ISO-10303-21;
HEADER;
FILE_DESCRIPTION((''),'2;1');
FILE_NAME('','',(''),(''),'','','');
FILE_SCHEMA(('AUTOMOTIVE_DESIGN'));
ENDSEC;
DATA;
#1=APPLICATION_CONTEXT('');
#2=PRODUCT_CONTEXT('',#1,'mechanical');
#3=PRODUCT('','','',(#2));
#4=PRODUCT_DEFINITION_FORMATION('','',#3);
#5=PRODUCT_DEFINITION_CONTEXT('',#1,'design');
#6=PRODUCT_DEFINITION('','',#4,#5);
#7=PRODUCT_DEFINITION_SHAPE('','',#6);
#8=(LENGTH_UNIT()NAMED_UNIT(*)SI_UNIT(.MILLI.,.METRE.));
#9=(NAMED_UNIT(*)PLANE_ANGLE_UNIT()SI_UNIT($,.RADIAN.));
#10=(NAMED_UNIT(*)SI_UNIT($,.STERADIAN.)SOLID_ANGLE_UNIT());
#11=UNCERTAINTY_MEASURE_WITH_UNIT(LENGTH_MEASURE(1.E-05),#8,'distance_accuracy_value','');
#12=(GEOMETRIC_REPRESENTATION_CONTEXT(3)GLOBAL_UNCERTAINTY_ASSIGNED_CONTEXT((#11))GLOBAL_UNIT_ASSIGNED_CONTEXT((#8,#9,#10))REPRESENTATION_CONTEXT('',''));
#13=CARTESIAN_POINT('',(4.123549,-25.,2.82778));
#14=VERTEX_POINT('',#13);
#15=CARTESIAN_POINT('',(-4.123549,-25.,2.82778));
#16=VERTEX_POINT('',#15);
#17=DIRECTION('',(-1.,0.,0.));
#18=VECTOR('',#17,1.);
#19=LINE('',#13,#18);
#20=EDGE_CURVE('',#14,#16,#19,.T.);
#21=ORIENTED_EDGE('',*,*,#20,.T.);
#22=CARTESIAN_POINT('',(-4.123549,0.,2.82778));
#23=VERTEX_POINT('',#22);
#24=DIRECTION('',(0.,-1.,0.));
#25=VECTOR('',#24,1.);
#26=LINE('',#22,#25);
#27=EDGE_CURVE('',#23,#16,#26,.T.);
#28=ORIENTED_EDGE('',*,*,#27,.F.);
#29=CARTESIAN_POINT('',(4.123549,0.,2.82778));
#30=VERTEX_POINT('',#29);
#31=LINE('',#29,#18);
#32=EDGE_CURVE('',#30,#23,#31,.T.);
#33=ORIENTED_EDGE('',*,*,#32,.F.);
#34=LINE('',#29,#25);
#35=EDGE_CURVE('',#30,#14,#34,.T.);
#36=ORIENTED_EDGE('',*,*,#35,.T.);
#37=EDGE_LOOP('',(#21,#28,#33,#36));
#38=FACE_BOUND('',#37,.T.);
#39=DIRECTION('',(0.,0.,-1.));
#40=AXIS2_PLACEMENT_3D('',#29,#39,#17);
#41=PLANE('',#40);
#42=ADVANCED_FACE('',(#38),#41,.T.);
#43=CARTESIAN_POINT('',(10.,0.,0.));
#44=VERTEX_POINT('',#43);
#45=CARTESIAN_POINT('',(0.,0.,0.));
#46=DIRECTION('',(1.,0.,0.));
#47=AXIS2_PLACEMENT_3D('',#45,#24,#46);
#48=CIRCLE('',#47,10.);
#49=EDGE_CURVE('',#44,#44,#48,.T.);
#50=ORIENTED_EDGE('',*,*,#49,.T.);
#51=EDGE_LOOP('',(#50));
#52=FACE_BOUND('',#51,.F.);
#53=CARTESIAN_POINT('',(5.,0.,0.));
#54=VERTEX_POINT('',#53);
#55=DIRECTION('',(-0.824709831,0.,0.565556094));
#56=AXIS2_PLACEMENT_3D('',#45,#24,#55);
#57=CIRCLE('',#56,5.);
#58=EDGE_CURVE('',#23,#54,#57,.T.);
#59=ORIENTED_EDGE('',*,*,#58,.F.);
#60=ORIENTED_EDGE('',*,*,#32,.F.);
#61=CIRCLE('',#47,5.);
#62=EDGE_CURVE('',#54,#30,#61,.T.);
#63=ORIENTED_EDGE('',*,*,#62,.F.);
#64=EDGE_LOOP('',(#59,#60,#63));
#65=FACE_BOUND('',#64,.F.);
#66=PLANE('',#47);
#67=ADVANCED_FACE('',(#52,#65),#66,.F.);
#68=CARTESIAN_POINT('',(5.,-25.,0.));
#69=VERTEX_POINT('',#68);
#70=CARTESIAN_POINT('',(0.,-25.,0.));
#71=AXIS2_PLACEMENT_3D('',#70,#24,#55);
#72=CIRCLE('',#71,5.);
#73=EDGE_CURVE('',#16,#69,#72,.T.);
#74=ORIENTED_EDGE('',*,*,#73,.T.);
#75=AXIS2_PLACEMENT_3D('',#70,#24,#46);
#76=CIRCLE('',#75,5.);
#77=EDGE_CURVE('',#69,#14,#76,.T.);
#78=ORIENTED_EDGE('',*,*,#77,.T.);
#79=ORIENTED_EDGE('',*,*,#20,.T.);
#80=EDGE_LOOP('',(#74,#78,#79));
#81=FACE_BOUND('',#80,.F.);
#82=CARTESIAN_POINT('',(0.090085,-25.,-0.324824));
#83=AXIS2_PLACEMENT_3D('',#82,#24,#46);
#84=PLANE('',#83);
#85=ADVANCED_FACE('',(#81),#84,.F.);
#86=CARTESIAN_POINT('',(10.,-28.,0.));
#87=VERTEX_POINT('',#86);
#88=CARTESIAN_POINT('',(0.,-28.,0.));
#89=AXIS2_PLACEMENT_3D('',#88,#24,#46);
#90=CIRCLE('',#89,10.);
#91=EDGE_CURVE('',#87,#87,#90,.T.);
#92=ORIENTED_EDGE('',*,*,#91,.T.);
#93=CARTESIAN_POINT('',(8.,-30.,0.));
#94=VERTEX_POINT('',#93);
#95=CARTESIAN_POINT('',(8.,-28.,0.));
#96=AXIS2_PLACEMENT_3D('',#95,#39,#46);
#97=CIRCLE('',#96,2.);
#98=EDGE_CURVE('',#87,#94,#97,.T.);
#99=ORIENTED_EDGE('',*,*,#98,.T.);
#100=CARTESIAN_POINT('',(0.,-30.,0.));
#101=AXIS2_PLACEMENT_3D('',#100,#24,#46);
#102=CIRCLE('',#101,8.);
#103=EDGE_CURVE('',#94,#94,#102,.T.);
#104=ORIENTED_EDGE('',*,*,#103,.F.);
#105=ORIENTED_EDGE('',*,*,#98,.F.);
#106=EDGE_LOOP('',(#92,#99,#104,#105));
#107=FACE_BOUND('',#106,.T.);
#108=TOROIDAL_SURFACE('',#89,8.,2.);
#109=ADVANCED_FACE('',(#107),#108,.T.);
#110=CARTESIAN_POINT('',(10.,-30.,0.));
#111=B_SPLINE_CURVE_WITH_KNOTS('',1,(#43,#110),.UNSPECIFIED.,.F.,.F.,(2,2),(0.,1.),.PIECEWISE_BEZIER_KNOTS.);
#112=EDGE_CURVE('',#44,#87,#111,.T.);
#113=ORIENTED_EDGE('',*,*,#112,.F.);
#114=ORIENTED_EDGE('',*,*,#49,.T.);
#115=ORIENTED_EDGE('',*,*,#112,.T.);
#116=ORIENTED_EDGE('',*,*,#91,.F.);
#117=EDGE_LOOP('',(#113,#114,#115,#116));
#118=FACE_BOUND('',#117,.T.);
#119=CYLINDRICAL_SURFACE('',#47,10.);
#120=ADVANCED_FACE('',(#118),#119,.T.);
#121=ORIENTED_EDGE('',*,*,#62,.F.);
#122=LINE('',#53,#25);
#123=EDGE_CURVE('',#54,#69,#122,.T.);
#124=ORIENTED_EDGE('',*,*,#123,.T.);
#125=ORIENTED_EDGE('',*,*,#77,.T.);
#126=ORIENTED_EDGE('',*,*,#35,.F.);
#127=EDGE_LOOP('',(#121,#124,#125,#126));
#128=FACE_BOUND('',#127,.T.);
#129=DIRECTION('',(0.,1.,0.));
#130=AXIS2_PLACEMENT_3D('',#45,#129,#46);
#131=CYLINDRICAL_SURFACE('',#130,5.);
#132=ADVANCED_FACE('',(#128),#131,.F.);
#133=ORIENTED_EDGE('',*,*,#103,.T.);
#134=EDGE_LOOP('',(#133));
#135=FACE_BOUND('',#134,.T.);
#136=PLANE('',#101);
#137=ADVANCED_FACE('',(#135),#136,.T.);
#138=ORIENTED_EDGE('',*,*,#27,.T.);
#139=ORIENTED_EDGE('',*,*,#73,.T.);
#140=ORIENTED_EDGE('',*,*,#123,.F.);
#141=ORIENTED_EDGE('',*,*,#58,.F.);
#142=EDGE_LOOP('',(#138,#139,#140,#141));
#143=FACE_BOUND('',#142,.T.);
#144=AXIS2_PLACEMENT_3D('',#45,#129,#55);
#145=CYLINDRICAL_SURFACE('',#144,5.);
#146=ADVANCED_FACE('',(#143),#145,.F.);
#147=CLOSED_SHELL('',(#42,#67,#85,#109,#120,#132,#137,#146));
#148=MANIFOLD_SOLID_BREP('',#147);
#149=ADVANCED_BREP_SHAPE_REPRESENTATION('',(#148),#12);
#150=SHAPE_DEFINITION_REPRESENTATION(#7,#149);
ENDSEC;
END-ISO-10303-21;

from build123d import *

# Parameters (mm, degrees)
F2_R     = 10
F1_R     = 10
F4_R     = 2
F6_DEPTH = 25


with BuildPart() as f3:
    # F2 (on Front) → F3 section 0
    with BuildSketch(Plane.XZ):
        Circle(F2_R)
    # F1 (on offset) → F3 section 1
    with BuildSketch(Plane.XZ.offset(30)):
        Circle(F1_R)
    loft()

    # F4
    f4_edges = [f3.edges().sort_by_distance(p)[0] for p in [
        (-10, -30, 0),
    ]]
    fillet(f4_edges, radius=F4_R)

    # F5 (on Front) → F6 (cut)
    with BuildSketch(Plane.XZ):
        with BuildLine():
            ThreePointArc((-4.1235491527, 2.8277804697), (-1.4802456276, -4.7758635745), (5, 0))
            ThreePointArc((5, 0), (4.7758635745, 1.4802456276), (4.1235491527, 2.8277804697))
            Line((4.1235491527, 2.8277804697), (-4.1235491527, 2.8277804697))
        make_face()
    extrude(amount=F6_DEPTH, mode=Mode.SUBTRACT)


solid = f3.part
